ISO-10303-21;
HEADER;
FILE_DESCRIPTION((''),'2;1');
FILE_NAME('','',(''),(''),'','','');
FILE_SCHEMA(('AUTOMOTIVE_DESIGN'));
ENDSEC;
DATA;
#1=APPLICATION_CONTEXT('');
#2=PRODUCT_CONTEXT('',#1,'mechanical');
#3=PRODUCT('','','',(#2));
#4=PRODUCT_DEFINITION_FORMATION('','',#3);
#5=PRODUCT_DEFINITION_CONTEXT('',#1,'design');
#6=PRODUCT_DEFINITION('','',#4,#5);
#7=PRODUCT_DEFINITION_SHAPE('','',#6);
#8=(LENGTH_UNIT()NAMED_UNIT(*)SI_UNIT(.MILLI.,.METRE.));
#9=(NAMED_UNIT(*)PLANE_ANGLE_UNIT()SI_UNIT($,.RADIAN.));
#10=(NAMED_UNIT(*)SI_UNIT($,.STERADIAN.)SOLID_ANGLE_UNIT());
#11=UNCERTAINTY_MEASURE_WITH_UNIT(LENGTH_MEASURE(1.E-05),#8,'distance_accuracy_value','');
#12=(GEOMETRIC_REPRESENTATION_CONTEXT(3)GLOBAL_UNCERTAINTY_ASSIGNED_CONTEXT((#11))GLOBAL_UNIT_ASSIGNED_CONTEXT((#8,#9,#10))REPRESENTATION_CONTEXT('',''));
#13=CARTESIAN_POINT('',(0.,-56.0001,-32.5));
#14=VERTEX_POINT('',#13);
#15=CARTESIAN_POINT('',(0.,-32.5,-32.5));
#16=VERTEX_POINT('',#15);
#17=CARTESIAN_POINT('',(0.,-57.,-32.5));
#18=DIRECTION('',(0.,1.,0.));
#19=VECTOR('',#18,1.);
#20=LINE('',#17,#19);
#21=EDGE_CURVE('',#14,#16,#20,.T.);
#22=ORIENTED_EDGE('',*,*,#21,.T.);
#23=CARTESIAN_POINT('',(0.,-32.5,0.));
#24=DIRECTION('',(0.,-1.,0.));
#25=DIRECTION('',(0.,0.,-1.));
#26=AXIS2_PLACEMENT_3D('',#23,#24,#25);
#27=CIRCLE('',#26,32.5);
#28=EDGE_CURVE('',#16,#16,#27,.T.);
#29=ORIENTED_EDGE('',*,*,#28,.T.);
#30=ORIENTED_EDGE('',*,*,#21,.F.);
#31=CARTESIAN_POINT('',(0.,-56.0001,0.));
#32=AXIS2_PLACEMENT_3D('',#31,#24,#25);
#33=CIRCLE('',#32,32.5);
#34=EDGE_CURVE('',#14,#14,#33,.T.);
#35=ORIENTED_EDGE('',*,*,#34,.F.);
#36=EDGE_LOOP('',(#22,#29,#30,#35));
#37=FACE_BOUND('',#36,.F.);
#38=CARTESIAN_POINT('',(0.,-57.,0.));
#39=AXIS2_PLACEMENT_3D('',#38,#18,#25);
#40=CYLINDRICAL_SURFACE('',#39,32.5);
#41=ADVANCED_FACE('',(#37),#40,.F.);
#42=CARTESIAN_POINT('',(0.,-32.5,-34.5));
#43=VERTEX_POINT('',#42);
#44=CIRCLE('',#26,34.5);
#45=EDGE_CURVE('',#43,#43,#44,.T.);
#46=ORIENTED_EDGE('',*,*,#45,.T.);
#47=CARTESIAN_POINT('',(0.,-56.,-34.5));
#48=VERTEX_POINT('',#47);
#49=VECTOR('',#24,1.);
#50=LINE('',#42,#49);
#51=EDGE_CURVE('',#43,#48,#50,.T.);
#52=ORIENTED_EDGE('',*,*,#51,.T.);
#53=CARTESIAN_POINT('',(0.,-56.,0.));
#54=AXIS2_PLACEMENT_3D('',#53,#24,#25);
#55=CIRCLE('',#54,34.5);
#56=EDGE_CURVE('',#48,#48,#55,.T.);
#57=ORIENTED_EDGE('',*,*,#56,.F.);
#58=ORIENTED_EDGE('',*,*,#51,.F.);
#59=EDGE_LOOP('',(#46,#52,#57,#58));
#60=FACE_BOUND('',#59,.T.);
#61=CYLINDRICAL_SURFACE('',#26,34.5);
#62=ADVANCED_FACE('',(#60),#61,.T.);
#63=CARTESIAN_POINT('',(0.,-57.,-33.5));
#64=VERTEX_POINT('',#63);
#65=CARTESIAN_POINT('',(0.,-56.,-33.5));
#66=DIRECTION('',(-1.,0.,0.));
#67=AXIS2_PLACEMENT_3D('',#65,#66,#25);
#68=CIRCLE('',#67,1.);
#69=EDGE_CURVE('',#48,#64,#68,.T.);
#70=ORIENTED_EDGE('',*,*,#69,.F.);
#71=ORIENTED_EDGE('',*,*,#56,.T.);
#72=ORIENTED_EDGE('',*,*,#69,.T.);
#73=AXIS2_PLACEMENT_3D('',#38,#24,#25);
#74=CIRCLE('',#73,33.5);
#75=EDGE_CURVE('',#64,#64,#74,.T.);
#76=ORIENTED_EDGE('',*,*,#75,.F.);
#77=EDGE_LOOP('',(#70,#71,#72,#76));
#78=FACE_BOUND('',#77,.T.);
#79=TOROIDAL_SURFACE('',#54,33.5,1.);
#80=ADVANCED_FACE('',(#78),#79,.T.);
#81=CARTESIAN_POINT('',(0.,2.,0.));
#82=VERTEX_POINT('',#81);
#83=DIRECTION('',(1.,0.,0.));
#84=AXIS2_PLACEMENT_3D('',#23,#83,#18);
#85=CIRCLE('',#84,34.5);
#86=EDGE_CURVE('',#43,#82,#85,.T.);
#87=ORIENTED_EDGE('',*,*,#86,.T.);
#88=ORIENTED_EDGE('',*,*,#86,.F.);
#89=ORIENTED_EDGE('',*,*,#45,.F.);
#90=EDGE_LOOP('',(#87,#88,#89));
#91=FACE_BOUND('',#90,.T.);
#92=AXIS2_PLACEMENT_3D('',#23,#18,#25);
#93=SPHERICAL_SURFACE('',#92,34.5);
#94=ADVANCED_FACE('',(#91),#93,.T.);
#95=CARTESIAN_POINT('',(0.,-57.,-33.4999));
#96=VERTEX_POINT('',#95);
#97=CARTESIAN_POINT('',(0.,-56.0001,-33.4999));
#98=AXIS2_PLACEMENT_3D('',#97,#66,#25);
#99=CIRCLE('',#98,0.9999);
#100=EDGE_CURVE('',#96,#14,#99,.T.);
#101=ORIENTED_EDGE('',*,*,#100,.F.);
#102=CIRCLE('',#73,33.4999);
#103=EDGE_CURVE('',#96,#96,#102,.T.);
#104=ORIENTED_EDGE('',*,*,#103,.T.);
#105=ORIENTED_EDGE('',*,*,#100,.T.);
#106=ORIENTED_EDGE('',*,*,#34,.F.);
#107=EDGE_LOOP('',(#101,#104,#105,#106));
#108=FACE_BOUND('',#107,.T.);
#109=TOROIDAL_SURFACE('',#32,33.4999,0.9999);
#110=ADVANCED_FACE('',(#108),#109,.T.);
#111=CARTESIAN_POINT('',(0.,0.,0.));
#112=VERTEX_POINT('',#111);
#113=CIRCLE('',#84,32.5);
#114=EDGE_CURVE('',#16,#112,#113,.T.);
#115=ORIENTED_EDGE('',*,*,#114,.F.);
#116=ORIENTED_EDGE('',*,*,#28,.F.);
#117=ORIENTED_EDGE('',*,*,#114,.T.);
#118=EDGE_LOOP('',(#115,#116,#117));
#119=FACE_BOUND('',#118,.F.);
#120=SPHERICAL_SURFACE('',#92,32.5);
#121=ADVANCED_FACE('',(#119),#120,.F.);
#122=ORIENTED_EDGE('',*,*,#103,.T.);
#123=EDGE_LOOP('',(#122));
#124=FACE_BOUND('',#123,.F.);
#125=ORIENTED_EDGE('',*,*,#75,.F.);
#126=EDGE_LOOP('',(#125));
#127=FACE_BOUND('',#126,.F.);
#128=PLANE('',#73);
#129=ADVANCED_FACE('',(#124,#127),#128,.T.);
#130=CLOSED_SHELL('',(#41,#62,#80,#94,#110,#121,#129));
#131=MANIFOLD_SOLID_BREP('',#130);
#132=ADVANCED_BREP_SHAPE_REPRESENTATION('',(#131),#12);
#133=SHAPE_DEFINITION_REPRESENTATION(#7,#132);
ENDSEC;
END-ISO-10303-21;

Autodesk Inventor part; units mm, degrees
ref_plane "YZ Plane" through (0, 0, 0) normal (1, 0, 0) x (0, 1, 0)
ref_plane "XZ Plane" through (0, 0, 0) normal (0, 1, 0) x (-1, 0, 0)
ref_plane "XY Plane" through (0, 0, 0) normal (0, 0, 1) x (1, 0, 0)
sketch "Sketch1" plane through (0, 0, 0) normal (1, 0, 0) x (0, 1, 0)
  line L0 (0, 0) -> (-57, 0)
  line L1 (0, 0) -> (2, 0)
  line L2 (-57, 0) -> (-57, -32.5)
  line L3 (-57, -32.5) -> (-57, -34.5)
  line L4 (0, 0) -> (-32.5, 0)
  circle A0 centre (-32.5, 0) radius 32.5
  circle A1 centre (-32.5, 0) radius 34.5
  line L5 (-57, -32.5) -> (-32.5, -32.5)
  line L6 (-32.5, -34.5) -> (-57, -34.5)
  line L7 (0, 0) -> (2, 0)
  dimension "d0" = 57
  dimension "d1" = 2
  dimension "d2" = 32.5
  dimension "d3" = 2
  dimension "d4" = 32.5
revolve "Revolution1" add sketch "Sketch1" angle 360 about axis through (0, 0, 0) along (0, -1, 0) contours L1 A1 L5 A0 | L6 L3 L5 A1
fillet "Fillet1" radius 1 1 edges at (0, -57, 34.5)
fillet "Fillet2" radius 1 1 edges at (0, -57, 32.5)
properties part number "BlueYetiCap"
